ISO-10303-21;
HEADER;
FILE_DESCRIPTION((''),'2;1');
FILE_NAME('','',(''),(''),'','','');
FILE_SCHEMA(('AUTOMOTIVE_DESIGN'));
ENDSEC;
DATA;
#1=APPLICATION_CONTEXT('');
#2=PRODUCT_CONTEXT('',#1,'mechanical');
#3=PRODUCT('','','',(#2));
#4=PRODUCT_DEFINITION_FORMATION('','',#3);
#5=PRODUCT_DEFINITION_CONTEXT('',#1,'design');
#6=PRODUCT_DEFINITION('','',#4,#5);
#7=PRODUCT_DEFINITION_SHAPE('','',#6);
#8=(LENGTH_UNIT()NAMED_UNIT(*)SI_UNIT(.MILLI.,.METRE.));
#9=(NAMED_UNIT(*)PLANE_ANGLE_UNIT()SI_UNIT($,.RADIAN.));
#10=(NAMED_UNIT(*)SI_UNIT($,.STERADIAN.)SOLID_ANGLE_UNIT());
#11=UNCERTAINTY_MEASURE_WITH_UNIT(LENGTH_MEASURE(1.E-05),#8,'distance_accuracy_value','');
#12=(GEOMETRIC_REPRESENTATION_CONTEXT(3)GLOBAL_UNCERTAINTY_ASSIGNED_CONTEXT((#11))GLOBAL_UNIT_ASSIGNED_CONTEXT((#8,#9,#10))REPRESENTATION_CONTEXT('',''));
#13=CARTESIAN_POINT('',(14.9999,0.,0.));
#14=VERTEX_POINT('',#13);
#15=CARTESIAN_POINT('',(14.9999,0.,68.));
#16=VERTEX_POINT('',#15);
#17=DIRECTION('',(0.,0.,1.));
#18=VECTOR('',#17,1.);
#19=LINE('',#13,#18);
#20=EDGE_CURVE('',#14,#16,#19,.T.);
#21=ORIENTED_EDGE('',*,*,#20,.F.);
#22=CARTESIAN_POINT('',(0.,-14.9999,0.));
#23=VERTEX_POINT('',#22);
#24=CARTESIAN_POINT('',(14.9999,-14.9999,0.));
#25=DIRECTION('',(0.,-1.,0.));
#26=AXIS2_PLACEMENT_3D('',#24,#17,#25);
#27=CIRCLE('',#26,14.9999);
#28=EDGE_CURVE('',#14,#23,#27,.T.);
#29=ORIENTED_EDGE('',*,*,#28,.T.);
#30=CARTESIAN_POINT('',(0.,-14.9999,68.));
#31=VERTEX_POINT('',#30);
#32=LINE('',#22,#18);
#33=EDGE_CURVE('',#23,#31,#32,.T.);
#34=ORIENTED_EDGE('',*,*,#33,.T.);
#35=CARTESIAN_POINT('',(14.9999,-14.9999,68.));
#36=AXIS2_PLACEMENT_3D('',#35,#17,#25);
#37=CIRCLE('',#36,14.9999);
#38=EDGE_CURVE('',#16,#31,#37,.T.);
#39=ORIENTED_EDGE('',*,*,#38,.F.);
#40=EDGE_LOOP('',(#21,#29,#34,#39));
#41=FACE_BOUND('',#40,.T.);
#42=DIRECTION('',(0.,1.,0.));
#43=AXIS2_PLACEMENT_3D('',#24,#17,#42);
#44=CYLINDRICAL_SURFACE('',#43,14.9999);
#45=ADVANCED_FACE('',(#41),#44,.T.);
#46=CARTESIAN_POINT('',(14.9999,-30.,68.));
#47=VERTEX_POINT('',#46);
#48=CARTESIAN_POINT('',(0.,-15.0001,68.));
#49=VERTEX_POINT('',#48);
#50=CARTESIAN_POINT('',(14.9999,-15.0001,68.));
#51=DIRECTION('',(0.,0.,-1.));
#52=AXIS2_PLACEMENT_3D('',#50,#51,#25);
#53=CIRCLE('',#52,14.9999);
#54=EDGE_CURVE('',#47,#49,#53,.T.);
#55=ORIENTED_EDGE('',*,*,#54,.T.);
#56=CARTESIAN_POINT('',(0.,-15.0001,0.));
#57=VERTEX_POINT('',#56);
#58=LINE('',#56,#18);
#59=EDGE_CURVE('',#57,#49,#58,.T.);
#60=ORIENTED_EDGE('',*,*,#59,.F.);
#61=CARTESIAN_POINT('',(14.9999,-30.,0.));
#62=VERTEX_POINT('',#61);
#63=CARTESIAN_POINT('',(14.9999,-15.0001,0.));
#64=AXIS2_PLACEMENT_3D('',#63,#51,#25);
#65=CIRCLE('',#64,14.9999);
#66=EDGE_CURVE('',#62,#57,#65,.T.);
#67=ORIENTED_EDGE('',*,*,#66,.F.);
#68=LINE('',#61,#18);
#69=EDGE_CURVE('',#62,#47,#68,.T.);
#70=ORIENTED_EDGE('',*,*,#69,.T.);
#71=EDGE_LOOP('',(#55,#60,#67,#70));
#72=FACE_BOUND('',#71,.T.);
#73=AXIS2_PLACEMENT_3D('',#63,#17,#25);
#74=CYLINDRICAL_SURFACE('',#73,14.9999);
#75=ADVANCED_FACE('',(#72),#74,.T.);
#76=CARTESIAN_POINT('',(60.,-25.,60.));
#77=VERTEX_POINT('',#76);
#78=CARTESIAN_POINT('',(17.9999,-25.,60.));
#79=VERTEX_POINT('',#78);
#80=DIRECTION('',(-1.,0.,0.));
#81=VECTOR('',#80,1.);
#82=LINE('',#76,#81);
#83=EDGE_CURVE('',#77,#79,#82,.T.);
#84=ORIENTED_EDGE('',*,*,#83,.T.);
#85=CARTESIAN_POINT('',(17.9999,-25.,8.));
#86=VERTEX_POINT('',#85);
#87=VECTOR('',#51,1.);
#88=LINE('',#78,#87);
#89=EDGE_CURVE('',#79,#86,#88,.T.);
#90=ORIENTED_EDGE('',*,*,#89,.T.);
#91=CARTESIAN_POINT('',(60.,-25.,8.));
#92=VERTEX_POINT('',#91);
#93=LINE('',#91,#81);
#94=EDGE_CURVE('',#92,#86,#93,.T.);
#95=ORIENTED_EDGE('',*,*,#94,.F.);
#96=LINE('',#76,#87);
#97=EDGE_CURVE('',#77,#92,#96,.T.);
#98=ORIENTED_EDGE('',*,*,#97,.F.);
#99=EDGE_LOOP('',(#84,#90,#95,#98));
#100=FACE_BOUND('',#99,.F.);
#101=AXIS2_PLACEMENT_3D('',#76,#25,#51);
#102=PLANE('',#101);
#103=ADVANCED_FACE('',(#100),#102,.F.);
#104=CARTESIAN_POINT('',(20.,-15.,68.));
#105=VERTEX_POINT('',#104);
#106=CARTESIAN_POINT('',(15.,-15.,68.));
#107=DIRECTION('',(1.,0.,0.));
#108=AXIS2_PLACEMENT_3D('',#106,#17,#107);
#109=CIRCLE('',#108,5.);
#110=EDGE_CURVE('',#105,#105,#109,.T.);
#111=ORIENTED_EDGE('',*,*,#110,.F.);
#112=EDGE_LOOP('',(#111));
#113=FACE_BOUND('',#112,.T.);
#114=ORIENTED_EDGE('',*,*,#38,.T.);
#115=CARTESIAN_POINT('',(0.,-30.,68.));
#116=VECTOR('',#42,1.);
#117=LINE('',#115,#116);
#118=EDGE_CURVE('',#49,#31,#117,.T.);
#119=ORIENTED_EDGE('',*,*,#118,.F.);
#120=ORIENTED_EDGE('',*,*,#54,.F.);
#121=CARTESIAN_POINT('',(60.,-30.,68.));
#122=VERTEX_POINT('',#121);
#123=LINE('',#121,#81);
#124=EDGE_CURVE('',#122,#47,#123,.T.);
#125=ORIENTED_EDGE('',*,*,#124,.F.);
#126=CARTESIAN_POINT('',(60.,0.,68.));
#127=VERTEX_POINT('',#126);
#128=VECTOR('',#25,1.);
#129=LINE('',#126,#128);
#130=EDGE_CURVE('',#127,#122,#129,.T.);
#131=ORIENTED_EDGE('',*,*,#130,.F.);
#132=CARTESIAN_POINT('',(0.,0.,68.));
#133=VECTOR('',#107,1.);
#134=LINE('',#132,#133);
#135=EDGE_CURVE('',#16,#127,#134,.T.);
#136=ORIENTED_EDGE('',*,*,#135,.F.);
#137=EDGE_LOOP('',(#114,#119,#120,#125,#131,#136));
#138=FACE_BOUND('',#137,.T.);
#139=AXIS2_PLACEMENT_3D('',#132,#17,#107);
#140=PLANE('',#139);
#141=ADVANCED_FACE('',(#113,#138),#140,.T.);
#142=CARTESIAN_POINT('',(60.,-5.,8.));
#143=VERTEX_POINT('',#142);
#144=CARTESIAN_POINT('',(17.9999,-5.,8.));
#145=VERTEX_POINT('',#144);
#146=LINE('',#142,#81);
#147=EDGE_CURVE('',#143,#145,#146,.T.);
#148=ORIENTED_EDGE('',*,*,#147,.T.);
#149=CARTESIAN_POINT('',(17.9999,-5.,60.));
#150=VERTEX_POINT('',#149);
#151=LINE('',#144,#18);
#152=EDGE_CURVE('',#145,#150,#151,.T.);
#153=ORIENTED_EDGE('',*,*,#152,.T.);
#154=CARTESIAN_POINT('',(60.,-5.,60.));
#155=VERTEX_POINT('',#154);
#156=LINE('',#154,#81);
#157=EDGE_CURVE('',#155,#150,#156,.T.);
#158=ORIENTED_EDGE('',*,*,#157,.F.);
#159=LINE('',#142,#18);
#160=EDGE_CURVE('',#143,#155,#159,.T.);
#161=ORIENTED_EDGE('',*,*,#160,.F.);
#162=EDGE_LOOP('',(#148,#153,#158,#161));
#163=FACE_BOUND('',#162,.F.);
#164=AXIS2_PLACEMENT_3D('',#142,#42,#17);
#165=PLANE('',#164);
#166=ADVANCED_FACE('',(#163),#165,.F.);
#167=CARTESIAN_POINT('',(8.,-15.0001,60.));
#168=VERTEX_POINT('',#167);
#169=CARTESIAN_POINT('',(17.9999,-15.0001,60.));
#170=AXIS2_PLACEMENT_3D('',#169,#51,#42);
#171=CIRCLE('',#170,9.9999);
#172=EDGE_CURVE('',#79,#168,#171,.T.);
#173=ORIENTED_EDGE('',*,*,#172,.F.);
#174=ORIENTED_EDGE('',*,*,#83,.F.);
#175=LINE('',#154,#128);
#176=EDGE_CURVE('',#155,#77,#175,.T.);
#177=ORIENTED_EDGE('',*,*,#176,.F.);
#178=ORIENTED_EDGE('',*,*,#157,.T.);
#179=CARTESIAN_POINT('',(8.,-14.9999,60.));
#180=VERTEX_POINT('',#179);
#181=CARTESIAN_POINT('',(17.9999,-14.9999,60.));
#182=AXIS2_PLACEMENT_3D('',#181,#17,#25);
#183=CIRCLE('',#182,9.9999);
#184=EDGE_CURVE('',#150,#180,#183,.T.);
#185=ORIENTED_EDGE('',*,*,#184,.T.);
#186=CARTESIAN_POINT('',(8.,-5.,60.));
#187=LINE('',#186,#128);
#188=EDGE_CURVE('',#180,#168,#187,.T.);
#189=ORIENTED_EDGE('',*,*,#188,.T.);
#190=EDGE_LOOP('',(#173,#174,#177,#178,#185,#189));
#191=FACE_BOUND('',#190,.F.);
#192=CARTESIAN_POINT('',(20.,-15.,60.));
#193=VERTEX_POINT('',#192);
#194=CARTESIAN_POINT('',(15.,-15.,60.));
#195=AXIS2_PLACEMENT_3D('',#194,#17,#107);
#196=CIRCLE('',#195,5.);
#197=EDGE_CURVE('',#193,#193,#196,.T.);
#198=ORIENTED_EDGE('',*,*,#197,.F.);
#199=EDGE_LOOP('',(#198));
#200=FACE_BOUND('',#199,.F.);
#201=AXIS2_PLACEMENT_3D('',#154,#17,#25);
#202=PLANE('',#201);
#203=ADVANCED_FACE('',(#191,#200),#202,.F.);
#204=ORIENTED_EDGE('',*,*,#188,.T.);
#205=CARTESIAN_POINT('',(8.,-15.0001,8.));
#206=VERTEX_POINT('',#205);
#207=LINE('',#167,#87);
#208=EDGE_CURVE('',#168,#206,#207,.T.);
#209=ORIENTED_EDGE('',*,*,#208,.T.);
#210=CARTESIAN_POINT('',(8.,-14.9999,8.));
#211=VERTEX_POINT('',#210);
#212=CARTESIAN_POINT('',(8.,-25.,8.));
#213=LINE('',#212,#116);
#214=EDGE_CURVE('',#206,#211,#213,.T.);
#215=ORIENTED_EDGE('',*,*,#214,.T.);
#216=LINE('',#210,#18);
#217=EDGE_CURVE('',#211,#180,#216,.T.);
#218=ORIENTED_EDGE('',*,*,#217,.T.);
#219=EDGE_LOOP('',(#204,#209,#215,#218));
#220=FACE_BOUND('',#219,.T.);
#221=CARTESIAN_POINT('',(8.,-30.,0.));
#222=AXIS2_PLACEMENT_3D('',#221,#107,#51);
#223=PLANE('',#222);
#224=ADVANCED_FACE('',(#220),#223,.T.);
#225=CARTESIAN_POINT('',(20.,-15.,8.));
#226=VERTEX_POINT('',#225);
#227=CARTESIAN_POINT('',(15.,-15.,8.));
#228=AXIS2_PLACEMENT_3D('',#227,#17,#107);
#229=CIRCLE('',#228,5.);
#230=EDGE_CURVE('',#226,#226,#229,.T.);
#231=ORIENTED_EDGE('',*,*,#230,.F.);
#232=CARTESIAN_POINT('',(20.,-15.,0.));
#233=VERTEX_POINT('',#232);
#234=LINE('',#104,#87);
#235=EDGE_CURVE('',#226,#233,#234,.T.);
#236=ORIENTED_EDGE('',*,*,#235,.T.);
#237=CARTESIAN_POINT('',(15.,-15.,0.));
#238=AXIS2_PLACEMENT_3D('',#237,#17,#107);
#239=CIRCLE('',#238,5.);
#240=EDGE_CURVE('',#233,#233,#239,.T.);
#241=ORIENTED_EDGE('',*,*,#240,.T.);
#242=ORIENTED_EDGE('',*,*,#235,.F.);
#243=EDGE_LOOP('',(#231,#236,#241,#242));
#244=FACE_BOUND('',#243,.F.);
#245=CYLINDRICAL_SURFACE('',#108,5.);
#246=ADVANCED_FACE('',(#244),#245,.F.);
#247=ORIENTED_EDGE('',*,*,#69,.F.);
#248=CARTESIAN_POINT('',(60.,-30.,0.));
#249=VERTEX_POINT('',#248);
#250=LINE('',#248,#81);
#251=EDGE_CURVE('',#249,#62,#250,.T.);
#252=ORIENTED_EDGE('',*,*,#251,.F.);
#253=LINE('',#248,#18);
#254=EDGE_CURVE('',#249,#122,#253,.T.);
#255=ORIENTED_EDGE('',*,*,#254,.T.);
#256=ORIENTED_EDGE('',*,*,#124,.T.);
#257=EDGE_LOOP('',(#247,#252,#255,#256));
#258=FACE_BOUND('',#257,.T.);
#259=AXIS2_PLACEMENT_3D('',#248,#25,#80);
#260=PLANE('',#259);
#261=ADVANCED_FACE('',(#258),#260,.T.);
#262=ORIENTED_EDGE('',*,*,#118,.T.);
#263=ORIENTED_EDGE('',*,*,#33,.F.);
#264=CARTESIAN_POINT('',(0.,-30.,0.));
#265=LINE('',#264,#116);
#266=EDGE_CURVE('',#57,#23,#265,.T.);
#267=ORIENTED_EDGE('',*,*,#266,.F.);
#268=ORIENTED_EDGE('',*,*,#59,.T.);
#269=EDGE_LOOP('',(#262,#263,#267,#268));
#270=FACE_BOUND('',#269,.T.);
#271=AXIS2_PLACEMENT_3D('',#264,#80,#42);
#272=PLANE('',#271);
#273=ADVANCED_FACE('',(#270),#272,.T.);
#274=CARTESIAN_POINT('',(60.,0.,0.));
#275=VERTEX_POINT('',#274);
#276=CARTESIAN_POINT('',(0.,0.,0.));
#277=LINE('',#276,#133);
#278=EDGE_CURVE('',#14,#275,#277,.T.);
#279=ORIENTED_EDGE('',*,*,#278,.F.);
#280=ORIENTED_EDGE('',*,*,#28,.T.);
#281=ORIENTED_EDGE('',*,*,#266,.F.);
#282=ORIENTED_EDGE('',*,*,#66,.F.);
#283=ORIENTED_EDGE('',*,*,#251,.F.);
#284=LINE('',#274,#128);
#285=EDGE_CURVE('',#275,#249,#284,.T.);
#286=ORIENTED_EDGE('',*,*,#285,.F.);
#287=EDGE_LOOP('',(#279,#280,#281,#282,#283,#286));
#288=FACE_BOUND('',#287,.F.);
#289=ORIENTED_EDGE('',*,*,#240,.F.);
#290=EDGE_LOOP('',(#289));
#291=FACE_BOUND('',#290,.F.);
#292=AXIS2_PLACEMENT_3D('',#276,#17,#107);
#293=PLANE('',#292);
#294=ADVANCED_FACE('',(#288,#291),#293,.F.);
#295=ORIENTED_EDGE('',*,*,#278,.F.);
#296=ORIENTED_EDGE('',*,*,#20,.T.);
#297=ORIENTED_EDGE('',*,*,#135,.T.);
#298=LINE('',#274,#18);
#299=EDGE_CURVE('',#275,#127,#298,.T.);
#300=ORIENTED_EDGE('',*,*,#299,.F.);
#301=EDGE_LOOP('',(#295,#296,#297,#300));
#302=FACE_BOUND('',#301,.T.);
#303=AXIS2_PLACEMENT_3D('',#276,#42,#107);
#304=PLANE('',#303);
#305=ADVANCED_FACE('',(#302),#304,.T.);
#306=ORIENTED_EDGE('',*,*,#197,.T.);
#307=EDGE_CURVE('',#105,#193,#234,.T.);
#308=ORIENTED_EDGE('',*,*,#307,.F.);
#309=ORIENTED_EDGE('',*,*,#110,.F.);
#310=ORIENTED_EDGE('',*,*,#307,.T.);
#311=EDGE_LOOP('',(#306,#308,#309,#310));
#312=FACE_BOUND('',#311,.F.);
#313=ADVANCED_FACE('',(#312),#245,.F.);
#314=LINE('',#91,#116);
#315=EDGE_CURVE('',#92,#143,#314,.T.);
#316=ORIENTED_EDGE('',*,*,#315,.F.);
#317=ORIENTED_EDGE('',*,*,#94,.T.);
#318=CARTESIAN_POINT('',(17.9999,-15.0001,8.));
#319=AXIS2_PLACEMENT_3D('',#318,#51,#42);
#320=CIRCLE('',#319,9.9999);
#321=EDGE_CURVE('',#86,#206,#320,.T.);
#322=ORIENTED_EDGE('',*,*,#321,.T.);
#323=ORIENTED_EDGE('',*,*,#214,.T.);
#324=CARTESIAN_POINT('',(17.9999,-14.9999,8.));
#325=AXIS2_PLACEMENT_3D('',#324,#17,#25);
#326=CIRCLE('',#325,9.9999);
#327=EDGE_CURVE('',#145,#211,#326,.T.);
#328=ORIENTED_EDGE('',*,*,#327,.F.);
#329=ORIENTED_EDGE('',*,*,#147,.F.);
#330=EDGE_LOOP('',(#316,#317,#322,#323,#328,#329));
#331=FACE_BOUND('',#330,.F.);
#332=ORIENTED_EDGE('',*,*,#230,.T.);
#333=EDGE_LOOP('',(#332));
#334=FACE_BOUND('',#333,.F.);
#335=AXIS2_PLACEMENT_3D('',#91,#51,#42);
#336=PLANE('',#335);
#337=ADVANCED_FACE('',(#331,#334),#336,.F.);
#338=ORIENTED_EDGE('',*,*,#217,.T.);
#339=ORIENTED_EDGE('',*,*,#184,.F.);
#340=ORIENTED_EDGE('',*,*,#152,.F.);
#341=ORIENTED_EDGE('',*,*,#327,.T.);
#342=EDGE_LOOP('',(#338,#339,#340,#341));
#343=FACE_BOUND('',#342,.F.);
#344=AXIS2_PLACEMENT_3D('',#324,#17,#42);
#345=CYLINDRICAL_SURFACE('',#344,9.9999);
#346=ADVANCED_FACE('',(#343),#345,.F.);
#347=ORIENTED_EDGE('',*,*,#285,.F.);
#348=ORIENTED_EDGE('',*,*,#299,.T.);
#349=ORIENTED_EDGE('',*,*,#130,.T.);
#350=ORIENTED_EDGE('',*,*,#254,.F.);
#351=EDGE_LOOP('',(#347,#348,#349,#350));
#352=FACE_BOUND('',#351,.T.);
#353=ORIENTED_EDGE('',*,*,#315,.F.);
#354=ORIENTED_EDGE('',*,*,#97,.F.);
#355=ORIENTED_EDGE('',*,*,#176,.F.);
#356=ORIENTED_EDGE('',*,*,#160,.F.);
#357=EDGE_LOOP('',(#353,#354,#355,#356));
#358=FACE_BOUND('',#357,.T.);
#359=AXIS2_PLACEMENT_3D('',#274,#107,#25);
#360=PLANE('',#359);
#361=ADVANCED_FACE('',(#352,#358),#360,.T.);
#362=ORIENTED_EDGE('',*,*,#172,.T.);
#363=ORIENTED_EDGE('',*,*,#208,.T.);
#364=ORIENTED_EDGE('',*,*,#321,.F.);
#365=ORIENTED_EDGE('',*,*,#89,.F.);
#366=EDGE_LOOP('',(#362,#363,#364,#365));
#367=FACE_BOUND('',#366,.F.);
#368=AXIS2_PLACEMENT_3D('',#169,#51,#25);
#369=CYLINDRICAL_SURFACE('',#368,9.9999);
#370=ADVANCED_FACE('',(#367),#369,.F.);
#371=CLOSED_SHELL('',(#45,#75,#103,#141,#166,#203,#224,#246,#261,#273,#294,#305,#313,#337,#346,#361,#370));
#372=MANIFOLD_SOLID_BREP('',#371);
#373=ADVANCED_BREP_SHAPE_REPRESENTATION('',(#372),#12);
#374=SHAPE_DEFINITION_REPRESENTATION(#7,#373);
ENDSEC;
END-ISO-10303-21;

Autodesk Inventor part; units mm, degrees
ref_plane "YZ Plane" through (0, 0, 0) normal (1, 0, 0) x (0, 1, 0)
ref_plane "XZ Plane" through (0, 0, 0) normal (0, 1, 0) x (-1, 0, 0)
ref_plane "XY Plane" through (0, 0, 0) normal (0, 0, 1) x (1, 0, 0)
sketch "Sketch1" plane through (0, 0, 0) normal (0, 0, 1) x (1, 0, 0)
  line L0 (0, 0) -> (60, 0)
  line L1 (60, 0) -> (60, -30)
  line L2 (60, -30) -> (0, -30)
  line L3 (0, -30) -> (0, 0)
  dimension "d0" = 60
  dimension "d1" = 30
extrude "Extrusion1" add sketch "Sketch1" along normal blind 68
sketch "Sketch2" plane through (0, 0, 68) normal (0, 0, 1) x (1, 0, 0)
  circle A0 centre (15, -15) radius 5
  line L0 (0, -30) -> (60, -30) projected
  line L1 (0, 0) -> (0, -30) projected
  dimension "d4" = 10
  dimension "d5" = 15
  dimension "d6" = 15
extrude "Extrusion2" cut sketch "Sketch2" against normal blind 68
sketch "Sketch3" plane through (60, -30, 0) normal (1, 0, 0) x (0, 0, -1)
  line L0 (-60, 5) -> (-8, 5)
  line L1 (-8, 5) -> (-8, 25)
  line L2 (-8, 25) -> (-60, 25)
  line L3 (-60, 25) -> (-60, 5)
  line L4 (-60, 5) -> (-8, 25) construction
  line L5 (-8, 5) -> (-60, 25) construction
  line L6 (-68, 0) -> (-68, 30) projected
  line L7 (0, 0) -> (-68, 0) projected
  point P0 (0, 30)
  point P1 (-34, 15)
  dimension "d9" = 52
  dimension "d10" = 20
  dimension "d11" = 34
  dimension "d12" = 15
extrude "Extrusion3" cut sketch "Sketch3" against normal blind 52
full round fillet "Full Round Fillet1" first side at (42.6667, -5, 25.3333) centre faces at (8, -11.6667, 42.6667) second side at (42.6667, -25, 42.6667)
fillet "Fillet1" radius 15 2 edges at (0, 0, 34) (0, -30, 34)
properties part number "1st arm"
